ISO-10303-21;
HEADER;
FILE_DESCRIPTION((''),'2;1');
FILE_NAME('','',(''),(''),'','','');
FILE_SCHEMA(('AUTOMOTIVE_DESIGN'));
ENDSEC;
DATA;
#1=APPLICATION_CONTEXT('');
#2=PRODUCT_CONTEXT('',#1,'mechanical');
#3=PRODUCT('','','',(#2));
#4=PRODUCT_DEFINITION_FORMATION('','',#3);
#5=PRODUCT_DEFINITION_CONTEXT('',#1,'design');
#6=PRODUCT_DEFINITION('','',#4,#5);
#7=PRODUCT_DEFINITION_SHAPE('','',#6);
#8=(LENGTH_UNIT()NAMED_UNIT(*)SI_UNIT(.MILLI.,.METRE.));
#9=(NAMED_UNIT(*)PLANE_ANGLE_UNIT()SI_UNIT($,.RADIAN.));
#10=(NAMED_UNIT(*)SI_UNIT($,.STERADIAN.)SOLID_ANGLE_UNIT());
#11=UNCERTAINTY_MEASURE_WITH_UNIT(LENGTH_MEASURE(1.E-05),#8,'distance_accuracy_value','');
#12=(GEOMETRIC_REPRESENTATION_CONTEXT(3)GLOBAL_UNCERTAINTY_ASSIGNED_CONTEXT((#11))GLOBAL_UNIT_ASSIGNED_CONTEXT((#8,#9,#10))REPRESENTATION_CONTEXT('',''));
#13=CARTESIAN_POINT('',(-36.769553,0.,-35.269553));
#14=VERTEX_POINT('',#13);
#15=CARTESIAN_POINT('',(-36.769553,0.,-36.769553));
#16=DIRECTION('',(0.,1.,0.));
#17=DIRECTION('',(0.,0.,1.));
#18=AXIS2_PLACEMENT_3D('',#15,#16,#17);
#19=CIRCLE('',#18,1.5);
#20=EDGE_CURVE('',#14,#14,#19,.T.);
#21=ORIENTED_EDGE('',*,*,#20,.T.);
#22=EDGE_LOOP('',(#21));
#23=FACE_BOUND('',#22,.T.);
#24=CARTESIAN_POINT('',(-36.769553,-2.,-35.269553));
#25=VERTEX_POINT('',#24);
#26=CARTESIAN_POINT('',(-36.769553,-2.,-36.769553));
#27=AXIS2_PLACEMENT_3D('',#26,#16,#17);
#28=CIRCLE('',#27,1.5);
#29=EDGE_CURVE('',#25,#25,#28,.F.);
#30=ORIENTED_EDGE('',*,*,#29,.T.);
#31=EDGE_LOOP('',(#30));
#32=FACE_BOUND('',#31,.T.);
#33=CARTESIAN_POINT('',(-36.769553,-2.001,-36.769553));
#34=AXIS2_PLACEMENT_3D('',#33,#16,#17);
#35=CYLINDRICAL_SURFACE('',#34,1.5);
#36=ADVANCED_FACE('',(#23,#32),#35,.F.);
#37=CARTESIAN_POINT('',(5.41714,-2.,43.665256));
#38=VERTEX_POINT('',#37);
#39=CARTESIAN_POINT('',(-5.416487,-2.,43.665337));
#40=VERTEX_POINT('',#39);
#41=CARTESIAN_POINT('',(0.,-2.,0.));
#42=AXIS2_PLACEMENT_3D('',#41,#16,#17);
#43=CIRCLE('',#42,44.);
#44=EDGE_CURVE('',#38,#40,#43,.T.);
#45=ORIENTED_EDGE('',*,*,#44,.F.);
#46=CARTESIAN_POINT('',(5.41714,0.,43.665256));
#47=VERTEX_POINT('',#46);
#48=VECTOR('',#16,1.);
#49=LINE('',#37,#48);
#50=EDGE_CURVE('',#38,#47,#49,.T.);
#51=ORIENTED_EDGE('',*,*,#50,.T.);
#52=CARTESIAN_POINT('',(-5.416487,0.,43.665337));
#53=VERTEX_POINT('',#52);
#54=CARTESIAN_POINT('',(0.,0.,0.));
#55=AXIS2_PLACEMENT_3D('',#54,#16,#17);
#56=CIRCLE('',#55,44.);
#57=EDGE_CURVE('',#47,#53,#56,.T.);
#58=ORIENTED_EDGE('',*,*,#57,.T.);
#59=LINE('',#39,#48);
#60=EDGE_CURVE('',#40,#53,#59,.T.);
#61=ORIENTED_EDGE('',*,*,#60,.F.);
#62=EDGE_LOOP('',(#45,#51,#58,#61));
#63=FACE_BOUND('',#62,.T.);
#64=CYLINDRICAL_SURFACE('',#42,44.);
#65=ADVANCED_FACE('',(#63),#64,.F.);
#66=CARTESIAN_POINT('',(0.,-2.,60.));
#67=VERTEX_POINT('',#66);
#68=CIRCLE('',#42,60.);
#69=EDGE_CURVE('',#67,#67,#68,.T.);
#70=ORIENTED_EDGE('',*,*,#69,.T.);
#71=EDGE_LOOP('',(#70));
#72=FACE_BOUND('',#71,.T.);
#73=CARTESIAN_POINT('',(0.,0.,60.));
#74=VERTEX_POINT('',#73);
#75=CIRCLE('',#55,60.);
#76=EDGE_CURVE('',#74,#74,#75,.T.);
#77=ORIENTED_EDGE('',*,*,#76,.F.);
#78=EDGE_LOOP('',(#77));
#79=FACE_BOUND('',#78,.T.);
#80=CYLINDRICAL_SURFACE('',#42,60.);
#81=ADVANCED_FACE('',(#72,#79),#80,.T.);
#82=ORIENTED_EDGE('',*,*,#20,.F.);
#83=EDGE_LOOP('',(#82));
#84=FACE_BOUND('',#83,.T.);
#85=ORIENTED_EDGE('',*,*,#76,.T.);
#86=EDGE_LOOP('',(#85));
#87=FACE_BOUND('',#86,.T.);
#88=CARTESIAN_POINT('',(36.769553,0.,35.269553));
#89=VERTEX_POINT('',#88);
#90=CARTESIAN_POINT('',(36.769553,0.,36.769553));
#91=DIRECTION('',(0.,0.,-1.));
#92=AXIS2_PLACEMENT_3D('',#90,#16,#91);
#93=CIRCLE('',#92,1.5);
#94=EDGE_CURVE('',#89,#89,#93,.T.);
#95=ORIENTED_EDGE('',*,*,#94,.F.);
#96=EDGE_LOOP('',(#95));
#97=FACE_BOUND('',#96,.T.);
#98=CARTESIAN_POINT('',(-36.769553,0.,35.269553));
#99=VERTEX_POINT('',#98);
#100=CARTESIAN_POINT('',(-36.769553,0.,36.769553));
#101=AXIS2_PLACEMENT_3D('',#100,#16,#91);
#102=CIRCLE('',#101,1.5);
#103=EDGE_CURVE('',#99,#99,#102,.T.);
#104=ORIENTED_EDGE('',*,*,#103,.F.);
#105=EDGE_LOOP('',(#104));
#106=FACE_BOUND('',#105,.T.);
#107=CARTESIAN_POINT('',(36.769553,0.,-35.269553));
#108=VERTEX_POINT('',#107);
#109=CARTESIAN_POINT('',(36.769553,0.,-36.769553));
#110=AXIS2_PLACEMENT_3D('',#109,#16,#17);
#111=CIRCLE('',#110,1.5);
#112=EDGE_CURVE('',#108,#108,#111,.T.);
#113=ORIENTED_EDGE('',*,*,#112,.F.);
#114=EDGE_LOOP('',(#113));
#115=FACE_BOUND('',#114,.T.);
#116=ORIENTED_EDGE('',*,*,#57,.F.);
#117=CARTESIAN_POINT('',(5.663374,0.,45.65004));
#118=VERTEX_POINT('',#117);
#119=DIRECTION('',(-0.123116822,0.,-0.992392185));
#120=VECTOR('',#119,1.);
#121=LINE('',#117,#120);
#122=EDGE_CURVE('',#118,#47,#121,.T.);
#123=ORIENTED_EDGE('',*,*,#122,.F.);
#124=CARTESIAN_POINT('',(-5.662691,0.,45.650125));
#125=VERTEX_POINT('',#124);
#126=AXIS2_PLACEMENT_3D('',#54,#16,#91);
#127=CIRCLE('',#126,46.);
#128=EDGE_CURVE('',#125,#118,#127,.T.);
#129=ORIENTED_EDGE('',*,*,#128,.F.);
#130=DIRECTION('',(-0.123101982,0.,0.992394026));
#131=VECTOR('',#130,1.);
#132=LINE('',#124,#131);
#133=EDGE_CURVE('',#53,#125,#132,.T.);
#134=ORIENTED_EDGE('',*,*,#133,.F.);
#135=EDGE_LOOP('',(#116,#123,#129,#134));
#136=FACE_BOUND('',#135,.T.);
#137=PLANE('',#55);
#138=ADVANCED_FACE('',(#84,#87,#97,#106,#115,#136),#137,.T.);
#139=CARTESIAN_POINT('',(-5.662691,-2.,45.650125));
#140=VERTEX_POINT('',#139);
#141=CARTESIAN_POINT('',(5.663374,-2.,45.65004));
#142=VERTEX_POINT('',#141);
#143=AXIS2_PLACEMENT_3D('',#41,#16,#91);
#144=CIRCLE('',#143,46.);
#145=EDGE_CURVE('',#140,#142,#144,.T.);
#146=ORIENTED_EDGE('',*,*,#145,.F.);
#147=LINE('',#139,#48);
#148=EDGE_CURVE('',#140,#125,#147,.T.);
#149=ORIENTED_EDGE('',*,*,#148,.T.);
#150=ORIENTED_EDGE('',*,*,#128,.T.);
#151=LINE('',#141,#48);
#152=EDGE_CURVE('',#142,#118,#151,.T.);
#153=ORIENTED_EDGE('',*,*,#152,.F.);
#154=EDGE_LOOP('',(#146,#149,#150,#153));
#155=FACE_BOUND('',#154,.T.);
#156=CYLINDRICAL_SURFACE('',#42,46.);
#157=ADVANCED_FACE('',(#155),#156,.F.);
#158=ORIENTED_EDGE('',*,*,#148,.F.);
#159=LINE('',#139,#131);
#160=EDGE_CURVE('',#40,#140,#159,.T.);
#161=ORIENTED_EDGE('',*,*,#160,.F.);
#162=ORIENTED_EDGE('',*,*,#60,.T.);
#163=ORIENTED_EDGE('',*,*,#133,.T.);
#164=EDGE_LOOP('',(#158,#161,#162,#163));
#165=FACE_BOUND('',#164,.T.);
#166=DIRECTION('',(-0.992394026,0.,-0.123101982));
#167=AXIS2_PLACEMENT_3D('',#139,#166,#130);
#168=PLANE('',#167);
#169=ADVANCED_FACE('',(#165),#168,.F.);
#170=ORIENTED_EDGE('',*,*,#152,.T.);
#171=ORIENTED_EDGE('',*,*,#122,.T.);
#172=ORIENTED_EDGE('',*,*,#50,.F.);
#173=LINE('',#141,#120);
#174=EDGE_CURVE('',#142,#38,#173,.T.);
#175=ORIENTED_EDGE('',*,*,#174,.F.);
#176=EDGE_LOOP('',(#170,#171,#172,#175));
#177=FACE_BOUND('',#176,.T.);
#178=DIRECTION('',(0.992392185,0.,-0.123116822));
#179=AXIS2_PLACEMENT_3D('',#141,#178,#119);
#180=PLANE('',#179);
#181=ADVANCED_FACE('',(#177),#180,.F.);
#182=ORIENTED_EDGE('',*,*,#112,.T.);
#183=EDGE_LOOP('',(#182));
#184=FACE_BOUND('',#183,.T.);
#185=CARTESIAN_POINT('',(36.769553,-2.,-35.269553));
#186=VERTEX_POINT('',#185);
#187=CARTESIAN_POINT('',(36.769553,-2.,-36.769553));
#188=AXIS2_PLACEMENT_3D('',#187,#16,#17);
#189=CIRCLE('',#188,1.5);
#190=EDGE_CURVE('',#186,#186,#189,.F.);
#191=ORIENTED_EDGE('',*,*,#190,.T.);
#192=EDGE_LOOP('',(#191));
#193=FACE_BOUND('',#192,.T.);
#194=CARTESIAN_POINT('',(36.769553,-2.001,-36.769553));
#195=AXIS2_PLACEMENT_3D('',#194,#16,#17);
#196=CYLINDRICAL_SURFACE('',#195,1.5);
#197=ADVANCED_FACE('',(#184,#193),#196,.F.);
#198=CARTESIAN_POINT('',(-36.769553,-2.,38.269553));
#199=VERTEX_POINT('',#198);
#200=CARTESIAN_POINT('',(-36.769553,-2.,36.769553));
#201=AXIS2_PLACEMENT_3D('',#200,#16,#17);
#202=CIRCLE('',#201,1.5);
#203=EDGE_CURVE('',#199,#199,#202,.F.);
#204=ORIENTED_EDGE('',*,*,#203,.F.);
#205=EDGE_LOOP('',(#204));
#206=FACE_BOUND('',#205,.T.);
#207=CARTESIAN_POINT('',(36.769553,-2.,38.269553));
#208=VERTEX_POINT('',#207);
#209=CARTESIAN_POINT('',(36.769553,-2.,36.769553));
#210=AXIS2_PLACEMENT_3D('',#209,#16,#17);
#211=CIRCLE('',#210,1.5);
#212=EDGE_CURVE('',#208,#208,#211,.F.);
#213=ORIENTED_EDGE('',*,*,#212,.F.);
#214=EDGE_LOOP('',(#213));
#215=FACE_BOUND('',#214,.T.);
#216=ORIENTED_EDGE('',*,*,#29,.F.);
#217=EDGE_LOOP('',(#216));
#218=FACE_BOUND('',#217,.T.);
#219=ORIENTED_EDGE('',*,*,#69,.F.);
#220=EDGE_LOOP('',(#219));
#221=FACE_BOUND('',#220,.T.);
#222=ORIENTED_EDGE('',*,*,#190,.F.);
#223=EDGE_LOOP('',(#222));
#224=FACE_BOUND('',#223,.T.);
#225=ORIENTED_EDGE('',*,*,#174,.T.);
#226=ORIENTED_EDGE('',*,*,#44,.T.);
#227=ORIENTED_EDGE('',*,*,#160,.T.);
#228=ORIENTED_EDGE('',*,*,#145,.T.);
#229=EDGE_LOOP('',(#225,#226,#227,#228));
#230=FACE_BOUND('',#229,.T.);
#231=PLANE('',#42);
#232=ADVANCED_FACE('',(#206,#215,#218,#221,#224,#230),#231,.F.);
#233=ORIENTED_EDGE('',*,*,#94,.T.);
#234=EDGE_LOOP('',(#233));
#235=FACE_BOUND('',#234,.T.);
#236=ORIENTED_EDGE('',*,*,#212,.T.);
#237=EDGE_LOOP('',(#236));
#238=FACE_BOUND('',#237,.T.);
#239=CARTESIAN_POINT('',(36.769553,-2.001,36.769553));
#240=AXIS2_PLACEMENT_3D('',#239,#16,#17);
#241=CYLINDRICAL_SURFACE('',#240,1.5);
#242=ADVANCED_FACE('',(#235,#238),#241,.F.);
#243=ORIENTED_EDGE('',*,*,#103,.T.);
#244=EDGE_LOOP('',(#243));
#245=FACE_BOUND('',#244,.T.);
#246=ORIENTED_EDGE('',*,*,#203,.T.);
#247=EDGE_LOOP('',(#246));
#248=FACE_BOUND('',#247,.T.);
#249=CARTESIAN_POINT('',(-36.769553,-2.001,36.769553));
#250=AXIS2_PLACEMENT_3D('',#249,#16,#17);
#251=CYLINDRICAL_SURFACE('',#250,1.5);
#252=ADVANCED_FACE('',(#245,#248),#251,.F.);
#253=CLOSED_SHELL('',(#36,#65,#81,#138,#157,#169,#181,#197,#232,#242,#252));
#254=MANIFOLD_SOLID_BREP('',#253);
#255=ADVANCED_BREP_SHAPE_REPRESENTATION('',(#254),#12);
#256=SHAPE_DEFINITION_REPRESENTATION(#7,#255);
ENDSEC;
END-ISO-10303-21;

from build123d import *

# Parameters (mm, degrees)
SKETCH_1_R             = 60
SM_BASE_FLANGE_1_DEPTH = 2
CUT_EXTRUDE_1_REACH    = 86.876
SKETCH_6_R             = 1.5


# Sheet-metal steps are written as plain solids
with BuildPart() as part:
    # Sketch 1 → 基体-法兰1 (new body)
    with BuildSketch(Plane(origin=(0, 0, 0), x_dir=(1, 0, 0), z_dir=(0, 1, 0))):
        with Locations(Location((0, 0, 0), (0, 0, 270))):
            Circle(SKETCH_1_R)
        with BuildLine():
            Line((-5.662691153, -45.650125179), (-5.41648719, -43.665337128))
            ThreePointArc((-5.41648719, -43.665337128), (-0.000329002, 43.999999999), (5.41714019, -43.665256122))
            Line((5.41714019, -43.665256122), (5.663373835, -45.650040491))
            ThreePointArc((5.663373835, -45.650040491), (0.000343957, -45.999999999), (-5.662691153, -45.650125179))
        make_face(mode=Mode.SUBTRACT)
    extrude(amount=-SM_BASE_FLANGE_1_DEPTH)

    # 草图6 → 切除-拉伸1 (cut, up to next)
    with BuildSketch(Plane(origin=(0, 0, 0), x_dir=(1, 0, 0), z_dir=(0, 1, 0)), mode=Mode.PRIVATE) as cut_extrude_1_sk1:
        with Locations(Location((36.769552622, 36.769552622, 0), (0, 0, 270))):
            Circle(SKETCH_6_R)
    cut_extrude_1_tool1 = extrude(cut_extrude_1_sk1.sketch, amount=-CUT_EXTRUDE_1_REACH, mode=Mode.PRIVATE) & part.part
    # 草图6 → 切除-拉伸1 (cut, up to next)
    with BuildSketch(Plane(origin=(0, 0, 0), x_dir=(1, 0, 0), z_dir=(0, 1, 0)), mode=Mode.PRIVATE) as cut_extrude_1_sk2:
        with Locations(Location((-36.769552622, 36.769552622, 0), (0, 0, 270))):
            Circle(SKETCH_6_R)
    cut_extrude_1_tool2 = extrude(cut_extrude_1_sk2.sketch, amount=-CUT_EXTRUDE_1_REACH, mode=Mode.PRIVATE) & part.part
    # 草图6 → 切除-拉伸1 (cut, up to next)
    with BuildSketch(Plane(origin=(0, 0, 0), x_dir=(1, 0, 0), z_dir=(0, 1, 0)), mode=Mode.PRIVATE) as cut_extrude_1_sk3:
        with Locations(Location((36.769552622, -36.769552622, 0), (0, 0, 270))):
            Circle(SKETCH_6_R)
    cut_extrude_1_tool3 = extrude(cut_extrude_1_sk3.sketch, amount=-CUT_EXTRUDE_1_REACH, mode=Mode.PRIVATE) & part.part
    # 草图6 → 切除-拉伸1 (cut, up to next)
    with BuildSketch(Plane(origin=(0, 0, 0), x_dir=(1, 0, 0), z_dir=(0, 1, 0)), mode=Mode.PRIVATE) as cut_extrude_1_sk4:
        with Locations(Location((-36.769552622, -36.769552622, 0), (0, 0, 270))):
            Circle(SKETCH_6_R)
    cut_extrude_1_tool4 = extrude(cut_extrude_1_sk4.sketch, amount=-CUT_EXTRUDE_1_REACH, mode=Mode.PRIVATE) & part.part
    add(cut_extrude_1_tool1.solids().sort_by_distance((36.769553, 0, -36.769553))[0], mode=Mode.SUBTRACT)
    add(cut_extrude_1_tool2.solids().sort_by_distance((-36.769553, 0, -36.769553))[0], mode=Mode.SUBTRACT)
    add(cut_extrude_1_tool3.solids().sort_by_distance((36.769553, 0, 36.769553))[0], mode=Mode.SUBTRACT)
    add(cut_extrude_1_tool4.solids().sort_by_distance((-36.769553, 0, 36.769553))[0], mode=Mode.SUBTRACT)


solid = part.part
